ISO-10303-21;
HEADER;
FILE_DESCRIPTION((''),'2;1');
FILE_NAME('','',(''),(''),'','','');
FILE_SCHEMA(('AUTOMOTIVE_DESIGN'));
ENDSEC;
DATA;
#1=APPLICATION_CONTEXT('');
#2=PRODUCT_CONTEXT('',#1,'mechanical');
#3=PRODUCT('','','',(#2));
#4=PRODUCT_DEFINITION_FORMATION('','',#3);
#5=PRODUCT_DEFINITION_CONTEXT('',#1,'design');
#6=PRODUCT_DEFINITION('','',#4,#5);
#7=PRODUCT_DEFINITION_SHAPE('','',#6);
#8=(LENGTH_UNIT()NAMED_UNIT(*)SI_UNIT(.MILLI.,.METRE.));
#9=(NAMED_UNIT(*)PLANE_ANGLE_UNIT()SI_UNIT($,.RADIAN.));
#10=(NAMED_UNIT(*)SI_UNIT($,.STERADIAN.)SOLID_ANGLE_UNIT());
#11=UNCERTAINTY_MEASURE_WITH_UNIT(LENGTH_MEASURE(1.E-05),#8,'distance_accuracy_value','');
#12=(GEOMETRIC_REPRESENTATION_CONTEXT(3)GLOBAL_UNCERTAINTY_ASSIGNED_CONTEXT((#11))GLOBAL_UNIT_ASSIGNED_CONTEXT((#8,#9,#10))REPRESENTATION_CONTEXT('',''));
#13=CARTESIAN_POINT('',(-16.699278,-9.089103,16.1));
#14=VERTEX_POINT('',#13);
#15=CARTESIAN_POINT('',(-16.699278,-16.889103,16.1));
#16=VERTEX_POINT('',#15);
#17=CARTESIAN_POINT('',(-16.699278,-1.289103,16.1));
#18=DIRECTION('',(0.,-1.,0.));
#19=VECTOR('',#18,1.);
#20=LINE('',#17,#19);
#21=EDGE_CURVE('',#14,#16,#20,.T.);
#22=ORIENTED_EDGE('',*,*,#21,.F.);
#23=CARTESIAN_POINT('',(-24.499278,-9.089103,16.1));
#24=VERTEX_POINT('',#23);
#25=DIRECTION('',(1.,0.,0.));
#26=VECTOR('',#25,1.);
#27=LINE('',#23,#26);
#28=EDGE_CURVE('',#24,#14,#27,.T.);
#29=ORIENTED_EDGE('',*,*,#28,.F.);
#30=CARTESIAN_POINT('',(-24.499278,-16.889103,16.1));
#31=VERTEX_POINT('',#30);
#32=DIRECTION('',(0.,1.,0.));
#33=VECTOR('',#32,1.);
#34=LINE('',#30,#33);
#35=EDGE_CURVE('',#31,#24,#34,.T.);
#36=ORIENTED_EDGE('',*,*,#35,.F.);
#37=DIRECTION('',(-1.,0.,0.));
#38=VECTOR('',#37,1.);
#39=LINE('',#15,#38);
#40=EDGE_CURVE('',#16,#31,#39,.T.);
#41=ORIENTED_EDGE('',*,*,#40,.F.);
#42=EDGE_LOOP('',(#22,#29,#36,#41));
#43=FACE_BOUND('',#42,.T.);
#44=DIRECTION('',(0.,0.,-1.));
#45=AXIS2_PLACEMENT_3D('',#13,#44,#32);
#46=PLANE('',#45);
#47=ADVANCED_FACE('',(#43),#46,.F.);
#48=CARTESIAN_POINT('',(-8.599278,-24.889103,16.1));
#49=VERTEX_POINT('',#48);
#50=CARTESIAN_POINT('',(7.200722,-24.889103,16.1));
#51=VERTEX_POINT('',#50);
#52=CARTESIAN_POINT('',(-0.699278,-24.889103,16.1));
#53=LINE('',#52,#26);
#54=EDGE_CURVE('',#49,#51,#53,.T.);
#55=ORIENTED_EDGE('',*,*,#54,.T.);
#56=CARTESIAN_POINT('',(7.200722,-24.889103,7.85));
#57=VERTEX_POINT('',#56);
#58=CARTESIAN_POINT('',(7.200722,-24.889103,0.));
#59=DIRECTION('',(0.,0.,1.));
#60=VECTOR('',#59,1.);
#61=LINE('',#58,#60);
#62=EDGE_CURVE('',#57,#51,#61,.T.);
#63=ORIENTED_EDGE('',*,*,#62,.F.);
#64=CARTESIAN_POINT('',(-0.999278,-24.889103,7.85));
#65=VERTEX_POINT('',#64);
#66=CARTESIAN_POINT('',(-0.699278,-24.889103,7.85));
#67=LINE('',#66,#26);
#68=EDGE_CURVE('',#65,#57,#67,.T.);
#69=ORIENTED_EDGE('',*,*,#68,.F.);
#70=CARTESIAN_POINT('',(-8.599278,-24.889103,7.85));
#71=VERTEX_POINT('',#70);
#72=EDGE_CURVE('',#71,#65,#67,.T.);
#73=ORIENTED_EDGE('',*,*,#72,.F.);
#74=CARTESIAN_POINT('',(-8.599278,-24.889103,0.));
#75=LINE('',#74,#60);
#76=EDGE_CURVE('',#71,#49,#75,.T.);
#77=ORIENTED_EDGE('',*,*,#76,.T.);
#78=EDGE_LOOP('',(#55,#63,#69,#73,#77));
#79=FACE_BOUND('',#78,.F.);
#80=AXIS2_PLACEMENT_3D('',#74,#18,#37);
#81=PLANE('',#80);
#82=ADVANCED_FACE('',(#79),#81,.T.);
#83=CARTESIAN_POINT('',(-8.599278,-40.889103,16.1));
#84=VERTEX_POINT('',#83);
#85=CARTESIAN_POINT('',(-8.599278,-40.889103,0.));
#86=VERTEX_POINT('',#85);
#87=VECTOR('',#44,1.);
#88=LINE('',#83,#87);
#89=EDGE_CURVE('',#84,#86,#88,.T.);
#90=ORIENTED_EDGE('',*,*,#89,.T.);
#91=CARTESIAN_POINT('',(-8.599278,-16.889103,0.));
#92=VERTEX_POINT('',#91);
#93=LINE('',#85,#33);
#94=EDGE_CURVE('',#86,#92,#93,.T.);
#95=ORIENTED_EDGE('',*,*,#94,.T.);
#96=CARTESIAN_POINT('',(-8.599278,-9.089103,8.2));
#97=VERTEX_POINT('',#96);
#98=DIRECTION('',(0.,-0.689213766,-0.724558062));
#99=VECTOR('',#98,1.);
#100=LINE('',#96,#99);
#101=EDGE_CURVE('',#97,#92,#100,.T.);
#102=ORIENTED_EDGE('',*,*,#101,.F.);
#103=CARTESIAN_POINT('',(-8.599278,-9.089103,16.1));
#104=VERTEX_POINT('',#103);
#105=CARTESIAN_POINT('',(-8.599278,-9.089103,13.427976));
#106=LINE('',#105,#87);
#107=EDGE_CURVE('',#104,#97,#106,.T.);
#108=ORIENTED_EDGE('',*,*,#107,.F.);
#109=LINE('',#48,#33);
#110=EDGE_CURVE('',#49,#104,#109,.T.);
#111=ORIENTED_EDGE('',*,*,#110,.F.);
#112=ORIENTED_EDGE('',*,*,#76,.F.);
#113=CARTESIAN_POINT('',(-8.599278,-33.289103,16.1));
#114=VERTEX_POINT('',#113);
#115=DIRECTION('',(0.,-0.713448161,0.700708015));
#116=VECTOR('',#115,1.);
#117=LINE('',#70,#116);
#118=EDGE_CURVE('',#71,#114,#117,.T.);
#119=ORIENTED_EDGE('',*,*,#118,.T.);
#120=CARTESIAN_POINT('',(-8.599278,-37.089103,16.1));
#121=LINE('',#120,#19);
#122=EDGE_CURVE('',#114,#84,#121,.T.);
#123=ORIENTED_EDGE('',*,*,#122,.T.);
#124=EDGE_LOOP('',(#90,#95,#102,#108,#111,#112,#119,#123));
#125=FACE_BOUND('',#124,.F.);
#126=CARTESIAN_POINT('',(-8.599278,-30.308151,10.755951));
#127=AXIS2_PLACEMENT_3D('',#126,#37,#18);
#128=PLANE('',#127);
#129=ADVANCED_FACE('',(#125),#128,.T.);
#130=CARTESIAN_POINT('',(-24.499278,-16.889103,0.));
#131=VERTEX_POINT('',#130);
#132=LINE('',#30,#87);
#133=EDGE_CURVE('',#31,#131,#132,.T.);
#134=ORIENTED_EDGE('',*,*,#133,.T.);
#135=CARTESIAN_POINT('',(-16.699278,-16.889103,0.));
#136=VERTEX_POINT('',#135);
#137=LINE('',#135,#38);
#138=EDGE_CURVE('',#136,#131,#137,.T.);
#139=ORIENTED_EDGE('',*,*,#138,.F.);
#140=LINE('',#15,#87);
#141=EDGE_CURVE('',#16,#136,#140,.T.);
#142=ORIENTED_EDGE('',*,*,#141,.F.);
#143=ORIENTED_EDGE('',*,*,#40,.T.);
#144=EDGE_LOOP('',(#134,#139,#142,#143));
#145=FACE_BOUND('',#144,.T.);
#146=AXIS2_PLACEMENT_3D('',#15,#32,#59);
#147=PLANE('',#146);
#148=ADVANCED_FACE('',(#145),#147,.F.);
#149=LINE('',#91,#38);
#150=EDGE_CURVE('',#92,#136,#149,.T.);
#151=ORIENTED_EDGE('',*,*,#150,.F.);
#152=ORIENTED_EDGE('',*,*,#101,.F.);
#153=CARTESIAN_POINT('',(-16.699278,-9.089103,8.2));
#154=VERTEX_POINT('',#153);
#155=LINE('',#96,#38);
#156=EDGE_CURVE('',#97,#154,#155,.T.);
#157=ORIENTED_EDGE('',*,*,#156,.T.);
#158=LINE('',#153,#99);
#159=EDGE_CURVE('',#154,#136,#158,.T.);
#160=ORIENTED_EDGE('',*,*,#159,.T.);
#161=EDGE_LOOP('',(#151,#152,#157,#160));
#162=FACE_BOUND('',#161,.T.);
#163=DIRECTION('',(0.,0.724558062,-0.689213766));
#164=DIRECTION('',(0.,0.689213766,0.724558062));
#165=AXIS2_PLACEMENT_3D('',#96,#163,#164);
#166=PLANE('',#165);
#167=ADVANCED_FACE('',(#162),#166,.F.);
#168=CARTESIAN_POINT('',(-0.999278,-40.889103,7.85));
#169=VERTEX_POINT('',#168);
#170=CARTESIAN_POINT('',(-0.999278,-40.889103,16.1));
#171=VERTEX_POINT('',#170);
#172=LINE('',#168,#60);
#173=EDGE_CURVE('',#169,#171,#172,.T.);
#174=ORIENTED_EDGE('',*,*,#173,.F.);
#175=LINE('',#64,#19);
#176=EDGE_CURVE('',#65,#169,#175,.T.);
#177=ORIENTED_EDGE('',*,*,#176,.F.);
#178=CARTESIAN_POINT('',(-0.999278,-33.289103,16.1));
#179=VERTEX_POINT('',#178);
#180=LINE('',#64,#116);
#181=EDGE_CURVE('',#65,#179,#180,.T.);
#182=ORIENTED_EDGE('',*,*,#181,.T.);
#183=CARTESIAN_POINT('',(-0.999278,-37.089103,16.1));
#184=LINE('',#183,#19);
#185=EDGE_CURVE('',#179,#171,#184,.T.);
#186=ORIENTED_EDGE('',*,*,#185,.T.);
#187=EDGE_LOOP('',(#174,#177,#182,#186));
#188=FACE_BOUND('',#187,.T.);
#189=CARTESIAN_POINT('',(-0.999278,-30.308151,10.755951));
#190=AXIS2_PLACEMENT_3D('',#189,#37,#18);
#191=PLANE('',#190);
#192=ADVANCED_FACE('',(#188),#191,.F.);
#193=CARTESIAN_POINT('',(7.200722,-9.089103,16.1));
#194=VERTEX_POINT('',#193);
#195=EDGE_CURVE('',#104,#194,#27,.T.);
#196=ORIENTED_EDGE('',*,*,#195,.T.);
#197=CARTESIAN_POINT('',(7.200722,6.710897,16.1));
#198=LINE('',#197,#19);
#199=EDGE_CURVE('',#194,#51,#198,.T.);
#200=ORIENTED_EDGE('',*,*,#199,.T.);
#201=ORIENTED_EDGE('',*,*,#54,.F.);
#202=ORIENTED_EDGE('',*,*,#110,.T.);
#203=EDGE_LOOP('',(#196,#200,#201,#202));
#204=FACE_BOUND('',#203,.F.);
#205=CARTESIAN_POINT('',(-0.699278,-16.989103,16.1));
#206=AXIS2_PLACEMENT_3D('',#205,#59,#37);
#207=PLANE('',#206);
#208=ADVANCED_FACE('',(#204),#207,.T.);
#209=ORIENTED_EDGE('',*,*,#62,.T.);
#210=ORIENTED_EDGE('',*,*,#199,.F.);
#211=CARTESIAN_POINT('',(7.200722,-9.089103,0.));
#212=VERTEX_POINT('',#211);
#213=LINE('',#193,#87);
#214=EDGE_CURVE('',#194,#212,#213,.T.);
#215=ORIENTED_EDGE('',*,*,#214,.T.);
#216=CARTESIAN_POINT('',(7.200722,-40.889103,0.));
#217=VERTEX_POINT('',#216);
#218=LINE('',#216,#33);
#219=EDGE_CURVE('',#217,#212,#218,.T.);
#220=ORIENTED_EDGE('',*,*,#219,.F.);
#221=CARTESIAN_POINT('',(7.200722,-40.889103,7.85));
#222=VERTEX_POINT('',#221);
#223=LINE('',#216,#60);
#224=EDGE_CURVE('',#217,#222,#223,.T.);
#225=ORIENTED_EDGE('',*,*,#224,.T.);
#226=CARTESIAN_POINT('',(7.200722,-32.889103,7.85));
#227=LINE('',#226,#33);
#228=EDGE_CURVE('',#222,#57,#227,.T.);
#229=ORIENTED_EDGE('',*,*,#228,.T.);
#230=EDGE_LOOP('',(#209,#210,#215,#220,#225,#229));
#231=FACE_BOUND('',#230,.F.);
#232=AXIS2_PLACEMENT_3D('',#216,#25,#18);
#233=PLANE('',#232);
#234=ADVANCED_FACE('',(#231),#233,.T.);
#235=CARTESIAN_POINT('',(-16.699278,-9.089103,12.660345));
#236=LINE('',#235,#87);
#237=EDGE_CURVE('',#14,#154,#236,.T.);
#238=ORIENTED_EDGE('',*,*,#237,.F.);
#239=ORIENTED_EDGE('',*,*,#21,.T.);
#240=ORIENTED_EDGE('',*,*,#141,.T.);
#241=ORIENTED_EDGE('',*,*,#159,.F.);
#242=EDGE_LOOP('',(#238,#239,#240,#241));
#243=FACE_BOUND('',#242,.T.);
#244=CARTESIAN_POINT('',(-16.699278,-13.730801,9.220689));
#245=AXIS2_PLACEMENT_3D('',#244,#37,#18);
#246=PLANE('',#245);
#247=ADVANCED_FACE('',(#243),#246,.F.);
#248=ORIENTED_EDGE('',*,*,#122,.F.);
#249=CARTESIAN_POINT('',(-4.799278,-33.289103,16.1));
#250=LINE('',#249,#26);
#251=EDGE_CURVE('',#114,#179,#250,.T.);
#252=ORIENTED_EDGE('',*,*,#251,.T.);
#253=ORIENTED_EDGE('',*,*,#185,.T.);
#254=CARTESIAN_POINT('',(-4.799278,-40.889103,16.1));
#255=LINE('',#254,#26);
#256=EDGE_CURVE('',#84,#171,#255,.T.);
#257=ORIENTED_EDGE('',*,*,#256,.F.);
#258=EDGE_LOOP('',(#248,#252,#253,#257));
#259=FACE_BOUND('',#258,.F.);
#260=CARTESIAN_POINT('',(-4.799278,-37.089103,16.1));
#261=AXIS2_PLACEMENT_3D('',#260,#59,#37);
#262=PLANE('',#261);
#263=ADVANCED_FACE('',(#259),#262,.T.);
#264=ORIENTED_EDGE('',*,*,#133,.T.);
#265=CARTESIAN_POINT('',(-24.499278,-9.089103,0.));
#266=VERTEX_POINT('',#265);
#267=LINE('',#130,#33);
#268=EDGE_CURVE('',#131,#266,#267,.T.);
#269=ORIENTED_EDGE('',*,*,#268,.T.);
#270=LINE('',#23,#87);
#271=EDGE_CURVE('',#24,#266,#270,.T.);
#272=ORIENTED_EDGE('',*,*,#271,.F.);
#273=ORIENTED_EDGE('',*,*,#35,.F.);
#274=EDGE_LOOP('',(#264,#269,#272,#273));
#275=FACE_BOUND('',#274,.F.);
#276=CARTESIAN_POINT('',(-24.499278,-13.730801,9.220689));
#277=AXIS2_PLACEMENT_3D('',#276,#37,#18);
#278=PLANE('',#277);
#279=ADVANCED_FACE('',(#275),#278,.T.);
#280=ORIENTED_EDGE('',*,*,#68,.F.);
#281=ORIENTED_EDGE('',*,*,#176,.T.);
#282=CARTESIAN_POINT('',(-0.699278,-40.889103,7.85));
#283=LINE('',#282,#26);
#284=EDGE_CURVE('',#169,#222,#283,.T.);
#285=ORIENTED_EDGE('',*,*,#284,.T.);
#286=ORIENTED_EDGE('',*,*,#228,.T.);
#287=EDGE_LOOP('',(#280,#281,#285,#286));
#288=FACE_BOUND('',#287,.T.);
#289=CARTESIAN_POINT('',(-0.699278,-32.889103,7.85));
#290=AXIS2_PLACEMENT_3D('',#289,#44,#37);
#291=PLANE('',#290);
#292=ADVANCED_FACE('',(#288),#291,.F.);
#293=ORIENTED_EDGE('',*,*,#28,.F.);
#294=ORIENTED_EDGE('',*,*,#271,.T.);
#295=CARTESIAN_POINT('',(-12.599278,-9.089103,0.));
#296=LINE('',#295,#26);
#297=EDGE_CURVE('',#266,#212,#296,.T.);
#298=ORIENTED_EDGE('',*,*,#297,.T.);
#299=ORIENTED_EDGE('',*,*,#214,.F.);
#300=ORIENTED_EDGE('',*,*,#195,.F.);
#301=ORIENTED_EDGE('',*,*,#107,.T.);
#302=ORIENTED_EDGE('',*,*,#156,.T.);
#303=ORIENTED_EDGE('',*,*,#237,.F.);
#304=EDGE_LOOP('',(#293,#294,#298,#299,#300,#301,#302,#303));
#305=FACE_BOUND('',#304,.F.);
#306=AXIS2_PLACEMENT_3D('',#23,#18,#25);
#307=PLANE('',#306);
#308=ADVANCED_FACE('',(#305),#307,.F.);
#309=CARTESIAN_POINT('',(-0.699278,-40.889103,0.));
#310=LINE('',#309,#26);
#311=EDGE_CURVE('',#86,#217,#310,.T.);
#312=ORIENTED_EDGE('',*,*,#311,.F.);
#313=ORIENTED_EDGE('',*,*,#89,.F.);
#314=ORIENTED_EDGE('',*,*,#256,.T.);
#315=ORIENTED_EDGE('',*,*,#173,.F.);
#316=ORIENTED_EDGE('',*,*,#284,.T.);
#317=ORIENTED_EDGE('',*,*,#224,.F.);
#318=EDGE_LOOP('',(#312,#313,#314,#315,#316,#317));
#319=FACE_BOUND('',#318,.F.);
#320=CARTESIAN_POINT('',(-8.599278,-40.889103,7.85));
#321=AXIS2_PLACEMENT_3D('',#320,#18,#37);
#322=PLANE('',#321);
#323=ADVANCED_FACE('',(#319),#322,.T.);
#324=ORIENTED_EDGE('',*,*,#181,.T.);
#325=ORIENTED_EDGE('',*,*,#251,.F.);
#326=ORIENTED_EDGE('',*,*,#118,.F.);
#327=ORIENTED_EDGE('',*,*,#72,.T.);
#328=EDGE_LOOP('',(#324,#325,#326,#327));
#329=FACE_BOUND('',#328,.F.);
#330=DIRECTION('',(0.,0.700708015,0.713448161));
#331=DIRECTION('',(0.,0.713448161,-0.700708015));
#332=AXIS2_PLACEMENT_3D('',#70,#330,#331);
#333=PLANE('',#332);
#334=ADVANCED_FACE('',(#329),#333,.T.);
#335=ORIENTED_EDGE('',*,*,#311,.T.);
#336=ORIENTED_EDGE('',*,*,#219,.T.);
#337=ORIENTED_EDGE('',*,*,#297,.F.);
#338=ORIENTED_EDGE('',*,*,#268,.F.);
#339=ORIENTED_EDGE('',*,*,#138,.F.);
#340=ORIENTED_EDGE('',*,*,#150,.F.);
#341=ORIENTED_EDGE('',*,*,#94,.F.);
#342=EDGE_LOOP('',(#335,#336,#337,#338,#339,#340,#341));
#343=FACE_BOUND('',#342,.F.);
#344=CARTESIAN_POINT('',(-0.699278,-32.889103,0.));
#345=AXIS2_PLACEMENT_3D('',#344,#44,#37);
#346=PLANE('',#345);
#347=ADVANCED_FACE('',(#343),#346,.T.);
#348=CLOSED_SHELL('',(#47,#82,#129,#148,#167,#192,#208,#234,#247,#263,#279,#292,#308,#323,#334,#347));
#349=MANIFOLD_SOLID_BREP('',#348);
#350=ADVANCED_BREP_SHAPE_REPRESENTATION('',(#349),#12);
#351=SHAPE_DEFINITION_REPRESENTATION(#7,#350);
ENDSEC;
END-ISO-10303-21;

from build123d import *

# Parameters (mm, degrees)
F0_W      = 15.8
F0_H      = 15.8
F1_DEPTH  = 16.1
F3_DEPTH  = 8.1
F5_DEPTH  = 7.8
F6_W      = 15.8
F6_H      = 16
F7_DEPTH  = 7.85
F8_W      = 7.6
F8_H      = 7.6
F9_DEPTH  = 8.25
F11_DEPTH = 7.6
F13_W     = 7.8
F13_H     = 7.8
F14_DEPTH = 25.4


with BuildPart() as f1:
    # F0 (on Top) → F1 (new body)
    with BuildSketch(Plane.XY):
        with Locations((-0.699278047, -1.1891025347)):
            Rectangle(F0_W, F0_H)
    extrude(amount=F1_DEPTH)

    # F2 (on face) → F3 (join)
    with BuildSketch(Plane(origin=(-8.599278047, 0, 0), x_dir=(0, -1, 0), z_dir=(-1, 0, 0))):
        Polygon((1.2891025347, 0), (9.0891025347, 0), (9.0891025347, 8.2), align=None)
    extrude(amount=F3_DEPTH)

    # F4 (on face) → F5 (join)
    with BuildSketch(Plane(origin=(-16.699278047, 0, 0), x_dir=(0, -1, 0), z_dir=(-1, 0, 0))):
        Polygon((1.2891025347, 16.1), (1.2891025347, 0), (9.0891025347, 8.2), (9.0891025347, 16.1), align=None)
        Polygon((1.2891025347, 0), (9.0891025347, 0), (9.0891025347, 8.2), align=None)
    extrude(amount=F5_DEPTH)

    # F6 (on face) → F7 (join)
    with BuildSketch(Plane(origin=(0, 0, 0), x_dir=(1, 0, 0), z_dir=(0, 0, -1))):
        with Locations((-0.699278047, -14.7108974653)):
            Rectangle(F6_W, F6_H)
    extrude(amount=-F7_DEPTH)

    # F8 (on face) → F9 (join, through all)
    with BuildSketch(Plane.XY.offset(7.85)):
        with Locations((-4.799278047, 18.9108974653)):
            Rectangle(F8_W, F8_H)
    extrude(amount=F9_DEPTH)

    # F10 (on face) → F11 (join, through all)
    with BuildSketch(Plane(origin=(-8.599278047, 0, 0), x_dir=(0, -1, 0), z_dir=(-1, 0, 0))):
        Polygon((-6.7108974653, 7.85), (-15.1108974653, 16.1), (-15.1108974653, 7.85), align=None)
    extrude(amount=-F11_DEPTH)

    # F12: F1 across face


with BuildPart() as f1_1:
    add(f1.part)
    add(f1.part.mirror(Plane(origin=(-8.0758652597, -9.0891025347, 7.462251893), x_dir=(1, 0, 0), z_dir=(0, -1, 0))))

    # F13 (on face) → F14 (cut)
    with BuildSketch(Plane.XY.offset(16.1)):
        with Locations((-20.599278047, -5.1891025347)):
            Rectangle(F13_W, F13_H)
        Polygon((-16.699278047, -1.2891025347), (-16.699278047, -9.0891025347), (7.200721953, -9.0891025347), (7.200721953, 22.7108974653), (-24.499278047, 22.7108974653), (-24.499278047, -1.2891025347), align=None)
    extrude(amount=-F14_DEPTH, mode=Mode.SUBTRACT)


solid = f1_1.part
